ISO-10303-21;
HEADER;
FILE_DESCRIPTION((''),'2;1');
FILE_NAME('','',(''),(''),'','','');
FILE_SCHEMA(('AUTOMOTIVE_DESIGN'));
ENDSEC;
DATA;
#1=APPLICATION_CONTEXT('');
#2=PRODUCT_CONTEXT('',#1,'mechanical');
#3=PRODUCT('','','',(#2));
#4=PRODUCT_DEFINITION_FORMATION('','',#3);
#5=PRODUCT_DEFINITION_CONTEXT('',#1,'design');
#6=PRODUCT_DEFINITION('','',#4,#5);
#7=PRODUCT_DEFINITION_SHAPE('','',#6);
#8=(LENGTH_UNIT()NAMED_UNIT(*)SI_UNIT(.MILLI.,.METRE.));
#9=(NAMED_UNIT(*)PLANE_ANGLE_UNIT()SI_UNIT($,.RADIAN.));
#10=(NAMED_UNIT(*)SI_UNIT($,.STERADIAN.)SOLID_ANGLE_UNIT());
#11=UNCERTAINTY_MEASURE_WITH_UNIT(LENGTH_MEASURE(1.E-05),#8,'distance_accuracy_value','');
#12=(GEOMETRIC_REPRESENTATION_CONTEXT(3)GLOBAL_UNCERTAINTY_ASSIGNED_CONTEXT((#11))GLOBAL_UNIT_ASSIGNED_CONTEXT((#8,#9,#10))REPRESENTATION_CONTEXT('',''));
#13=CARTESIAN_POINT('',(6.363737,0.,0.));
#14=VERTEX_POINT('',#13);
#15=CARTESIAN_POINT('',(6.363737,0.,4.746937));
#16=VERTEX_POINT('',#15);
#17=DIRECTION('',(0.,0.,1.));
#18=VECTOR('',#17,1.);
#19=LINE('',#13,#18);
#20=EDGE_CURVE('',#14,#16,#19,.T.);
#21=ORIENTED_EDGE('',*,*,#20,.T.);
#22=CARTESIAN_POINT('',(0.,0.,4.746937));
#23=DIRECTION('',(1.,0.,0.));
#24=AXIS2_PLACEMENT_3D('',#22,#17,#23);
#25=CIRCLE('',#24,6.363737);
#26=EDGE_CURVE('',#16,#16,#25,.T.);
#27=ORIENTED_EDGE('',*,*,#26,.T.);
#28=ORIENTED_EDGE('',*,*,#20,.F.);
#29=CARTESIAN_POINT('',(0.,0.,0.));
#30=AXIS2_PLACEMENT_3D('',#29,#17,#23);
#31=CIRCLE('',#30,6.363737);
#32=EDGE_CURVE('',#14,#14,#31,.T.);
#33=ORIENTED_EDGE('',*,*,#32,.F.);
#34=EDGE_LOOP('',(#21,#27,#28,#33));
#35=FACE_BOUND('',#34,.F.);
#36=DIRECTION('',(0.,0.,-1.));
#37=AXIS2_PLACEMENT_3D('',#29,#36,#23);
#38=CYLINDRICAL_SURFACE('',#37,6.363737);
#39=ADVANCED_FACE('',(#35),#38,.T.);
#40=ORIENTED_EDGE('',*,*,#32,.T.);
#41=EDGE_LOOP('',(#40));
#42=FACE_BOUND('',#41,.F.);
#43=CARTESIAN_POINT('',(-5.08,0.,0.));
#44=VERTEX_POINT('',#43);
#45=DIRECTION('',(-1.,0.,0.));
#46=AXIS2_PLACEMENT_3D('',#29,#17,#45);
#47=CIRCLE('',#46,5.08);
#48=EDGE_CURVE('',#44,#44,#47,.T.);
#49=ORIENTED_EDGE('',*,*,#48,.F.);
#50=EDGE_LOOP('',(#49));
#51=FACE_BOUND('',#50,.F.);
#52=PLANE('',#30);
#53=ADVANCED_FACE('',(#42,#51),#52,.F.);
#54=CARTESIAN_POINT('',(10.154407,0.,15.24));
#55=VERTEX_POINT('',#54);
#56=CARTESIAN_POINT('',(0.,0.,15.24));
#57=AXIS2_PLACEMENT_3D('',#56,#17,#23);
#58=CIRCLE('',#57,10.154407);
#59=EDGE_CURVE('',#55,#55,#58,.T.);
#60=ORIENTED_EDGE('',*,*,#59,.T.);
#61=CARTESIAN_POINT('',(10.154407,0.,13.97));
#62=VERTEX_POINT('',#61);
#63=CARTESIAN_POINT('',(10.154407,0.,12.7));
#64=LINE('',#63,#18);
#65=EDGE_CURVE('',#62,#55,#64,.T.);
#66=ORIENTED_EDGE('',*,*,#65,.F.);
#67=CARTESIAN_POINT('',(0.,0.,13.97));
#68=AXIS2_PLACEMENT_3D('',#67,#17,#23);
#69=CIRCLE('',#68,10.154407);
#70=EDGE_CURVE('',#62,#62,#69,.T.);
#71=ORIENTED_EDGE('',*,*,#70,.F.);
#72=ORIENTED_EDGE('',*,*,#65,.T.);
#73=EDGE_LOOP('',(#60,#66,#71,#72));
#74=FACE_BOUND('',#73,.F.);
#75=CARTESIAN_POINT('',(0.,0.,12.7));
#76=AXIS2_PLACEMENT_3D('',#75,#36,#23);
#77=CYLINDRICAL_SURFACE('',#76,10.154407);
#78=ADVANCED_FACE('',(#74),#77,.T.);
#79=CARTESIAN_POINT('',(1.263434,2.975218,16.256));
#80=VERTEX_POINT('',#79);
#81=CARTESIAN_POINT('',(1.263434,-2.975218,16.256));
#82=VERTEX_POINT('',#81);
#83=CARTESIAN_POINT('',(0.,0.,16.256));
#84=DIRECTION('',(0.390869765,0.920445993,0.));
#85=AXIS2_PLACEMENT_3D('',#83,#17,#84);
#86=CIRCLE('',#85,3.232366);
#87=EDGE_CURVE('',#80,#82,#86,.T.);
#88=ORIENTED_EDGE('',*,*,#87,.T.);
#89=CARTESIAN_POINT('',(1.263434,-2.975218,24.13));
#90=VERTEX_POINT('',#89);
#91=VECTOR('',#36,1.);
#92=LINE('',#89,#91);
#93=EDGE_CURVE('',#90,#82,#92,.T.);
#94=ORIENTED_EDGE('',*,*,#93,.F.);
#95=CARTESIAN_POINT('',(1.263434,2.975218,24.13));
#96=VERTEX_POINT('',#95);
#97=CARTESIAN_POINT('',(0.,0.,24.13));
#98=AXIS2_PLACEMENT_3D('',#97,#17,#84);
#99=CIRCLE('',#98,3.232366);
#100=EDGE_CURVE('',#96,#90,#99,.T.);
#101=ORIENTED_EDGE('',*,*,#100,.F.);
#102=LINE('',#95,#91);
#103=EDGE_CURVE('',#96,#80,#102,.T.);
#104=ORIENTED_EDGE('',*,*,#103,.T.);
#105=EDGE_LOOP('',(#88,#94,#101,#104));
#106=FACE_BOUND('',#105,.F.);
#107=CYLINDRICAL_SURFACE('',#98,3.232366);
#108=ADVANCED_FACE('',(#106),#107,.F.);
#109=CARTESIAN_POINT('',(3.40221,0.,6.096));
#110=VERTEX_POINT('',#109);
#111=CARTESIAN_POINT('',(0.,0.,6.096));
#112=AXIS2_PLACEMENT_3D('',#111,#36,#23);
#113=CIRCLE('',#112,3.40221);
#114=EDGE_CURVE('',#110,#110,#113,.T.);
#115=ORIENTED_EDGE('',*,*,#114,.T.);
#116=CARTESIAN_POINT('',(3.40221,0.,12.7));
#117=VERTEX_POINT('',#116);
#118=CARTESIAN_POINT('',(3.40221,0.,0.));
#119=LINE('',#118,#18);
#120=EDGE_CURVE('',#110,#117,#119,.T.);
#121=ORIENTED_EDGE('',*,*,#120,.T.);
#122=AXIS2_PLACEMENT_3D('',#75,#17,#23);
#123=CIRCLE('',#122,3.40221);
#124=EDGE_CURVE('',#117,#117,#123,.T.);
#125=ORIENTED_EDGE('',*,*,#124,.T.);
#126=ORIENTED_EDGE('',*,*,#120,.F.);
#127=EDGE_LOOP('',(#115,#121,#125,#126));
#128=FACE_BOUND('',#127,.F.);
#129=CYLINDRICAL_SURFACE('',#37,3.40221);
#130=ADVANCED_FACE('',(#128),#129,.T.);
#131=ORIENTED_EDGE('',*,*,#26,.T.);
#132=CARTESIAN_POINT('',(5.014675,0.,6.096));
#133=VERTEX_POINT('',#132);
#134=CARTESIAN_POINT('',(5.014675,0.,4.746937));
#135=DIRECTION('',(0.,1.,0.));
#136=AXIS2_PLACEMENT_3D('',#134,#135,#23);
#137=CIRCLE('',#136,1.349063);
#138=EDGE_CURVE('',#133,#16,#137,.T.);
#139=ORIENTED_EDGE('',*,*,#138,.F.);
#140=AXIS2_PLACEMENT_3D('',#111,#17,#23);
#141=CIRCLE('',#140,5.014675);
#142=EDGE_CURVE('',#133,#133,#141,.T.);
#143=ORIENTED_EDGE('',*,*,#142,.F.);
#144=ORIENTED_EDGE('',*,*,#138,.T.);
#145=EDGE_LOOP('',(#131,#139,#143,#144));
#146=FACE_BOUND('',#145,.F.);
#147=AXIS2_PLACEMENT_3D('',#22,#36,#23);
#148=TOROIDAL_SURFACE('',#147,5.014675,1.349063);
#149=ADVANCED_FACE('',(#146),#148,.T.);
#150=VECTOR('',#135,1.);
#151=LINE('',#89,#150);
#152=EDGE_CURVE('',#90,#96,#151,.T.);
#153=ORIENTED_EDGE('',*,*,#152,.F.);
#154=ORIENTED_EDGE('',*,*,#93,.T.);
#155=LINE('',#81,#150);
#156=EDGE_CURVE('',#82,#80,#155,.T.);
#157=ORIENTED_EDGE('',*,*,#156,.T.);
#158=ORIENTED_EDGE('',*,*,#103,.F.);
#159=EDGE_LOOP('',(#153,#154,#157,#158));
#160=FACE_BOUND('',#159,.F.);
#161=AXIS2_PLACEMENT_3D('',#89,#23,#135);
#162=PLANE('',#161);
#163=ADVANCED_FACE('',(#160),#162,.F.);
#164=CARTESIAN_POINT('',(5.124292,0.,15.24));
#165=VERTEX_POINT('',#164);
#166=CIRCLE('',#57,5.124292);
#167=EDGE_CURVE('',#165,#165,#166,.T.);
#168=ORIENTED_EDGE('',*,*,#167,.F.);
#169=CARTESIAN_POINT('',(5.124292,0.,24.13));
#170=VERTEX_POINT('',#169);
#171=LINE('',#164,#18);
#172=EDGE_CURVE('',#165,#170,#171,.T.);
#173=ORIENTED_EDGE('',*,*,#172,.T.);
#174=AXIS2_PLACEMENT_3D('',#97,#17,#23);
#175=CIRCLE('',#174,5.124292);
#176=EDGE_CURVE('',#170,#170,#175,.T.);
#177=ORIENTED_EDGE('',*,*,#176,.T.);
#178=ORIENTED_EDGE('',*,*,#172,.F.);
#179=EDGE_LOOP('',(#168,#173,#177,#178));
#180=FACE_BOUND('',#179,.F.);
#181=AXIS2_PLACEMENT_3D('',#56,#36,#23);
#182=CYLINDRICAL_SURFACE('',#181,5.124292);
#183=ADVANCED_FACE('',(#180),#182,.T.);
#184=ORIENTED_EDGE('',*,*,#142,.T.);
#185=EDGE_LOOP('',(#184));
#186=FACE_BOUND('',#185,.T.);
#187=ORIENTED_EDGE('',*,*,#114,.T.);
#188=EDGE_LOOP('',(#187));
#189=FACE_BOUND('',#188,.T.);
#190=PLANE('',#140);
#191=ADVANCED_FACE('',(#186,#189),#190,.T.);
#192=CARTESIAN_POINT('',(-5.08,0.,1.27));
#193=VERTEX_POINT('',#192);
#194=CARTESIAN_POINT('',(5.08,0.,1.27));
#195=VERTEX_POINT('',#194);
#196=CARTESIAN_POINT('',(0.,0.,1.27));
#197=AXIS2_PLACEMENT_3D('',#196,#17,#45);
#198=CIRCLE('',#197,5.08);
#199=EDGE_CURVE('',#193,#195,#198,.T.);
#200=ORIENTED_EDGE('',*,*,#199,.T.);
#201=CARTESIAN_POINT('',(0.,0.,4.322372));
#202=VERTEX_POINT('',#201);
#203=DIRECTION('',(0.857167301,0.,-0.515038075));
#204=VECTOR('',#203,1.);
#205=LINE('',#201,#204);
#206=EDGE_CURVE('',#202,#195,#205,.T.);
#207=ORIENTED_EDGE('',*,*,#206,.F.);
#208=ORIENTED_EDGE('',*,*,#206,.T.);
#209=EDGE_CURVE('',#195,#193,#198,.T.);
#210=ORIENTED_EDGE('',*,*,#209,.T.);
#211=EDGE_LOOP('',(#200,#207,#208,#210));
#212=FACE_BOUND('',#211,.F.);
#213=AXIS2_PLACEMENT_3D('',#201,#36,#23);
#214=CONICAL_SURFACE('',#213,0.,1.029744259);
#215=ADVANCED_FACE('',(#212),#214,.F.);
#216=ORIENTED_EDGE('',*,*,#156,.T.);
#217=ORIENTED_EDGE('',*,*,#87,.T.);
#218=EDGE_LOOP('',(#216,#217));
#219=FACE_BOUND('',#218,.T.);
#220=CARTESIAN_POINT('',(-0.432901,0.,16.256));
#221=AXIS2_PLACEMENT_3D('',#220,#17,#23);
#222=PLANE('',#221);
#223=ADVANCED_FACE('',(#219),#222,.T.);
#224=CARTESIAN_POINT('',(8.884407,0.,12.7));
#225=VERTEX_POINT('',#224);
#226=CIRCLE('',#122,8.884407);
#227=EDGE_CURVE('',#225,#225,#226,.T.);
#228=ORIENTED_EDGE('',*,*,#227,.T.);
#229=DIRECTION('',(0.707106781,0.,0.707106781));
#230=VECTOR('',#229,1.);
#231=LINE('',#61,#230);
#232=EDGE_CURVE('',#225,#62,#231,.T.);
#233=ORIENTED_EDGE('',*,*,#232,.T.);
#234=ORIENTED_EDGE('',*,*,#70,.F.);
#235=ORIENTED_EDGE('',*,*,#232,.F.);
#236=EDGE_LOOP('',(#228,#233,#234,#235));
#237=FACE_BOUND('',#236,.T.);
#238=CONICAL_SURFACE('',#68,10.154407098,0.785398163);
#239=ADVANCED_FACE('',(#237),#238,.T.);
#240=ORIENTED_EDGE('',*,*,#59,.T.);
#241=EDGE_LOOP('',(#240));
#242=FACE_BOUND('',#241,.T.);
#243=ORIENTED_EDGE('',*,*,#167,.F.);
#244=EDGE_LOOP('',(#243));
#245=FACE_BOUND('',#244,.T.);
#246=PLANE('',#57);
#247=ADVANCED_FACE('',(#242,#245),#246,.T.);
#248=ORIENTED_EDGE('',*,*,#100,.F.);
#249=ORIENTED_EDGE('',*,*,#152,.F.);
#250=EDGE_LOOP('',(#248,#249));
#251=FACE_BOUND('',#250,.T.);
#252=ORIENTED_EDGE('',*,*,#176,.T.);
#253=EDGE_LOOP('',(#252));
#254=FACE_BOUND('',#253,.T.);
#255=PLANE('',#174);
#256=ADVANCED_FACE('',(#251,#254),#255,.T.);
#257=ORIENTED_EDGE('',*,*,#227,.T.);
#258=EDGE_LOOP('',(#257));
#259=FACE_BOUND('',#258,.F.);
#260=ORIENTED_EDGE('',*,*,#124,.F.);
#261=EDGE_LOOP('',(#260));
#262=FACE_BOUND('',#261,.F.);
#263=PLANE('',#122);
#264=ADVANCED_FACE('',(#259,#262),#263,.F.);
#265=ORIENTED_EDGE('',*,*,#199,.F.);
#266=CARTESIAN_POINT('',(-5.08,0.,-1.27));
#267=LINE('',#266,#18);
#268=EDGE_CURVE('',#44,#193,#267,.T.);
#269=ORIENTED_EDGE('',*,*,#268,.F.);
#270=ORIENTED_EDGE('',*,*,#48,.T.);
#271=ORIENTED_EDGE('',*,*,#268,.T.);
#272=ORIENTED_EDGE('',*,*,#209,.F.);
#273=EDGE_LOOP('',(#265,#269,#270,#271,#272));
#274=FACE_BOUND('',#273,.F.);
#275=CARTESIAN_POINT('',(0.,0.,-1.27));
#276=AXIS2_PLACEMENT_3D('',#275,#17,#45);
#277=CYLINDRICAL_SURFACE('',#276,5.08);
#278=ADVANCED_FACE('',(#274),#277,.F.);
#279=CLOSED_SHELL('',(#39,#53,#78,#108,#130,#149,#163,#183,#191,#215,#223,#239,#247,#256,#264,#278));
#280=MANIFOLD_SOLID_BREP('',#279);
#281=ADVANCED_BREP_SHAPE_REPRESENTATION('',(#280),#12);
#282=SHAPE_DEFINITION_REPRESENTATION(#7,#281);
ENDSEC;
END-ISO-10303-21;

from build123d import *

# Parameters (mm, degrees)
F0_R      = 6.3637373436
F1_DEPTH  = 6.096
F2_R      = 3.4022099148
F3_DEPTH  = 12.7
F5_R      = 10.1544070979
F6_DEPTH  = 2.54
F8_R      = 5.1242922549
F9_DEPTH  = 8.89
F12_DEPTH = 7.874
F13_D     = 10.16
F13_DEPTH = 1.27
F13_TIP   = 3.0523719447
F14_R     = 1.3490625387
F15_SIZE  = 1.27


with BuildPart() as f1:
    # F0 (on Top) → F1 (new body)
    with BuildSketch(Plane.XY):
        Circle(F0_R)
    extrude(amount=F1_DEPTH)

    # F2 (on Top) → F3 (join)
    with BuildSketch(Plane.XY):
        Circle(F2_R)
    extrude(amount=F3_DEPTH)

    # F5 (on offset) → F6 (join)
    with BuildSketch(Plane.XY.offset(12.7)):
        Circle(F5_R)
    extrude(amount=F6_DEPTH)

    # F8 (on offset) → F9 (join)
    with BuildSketch(Plane.XY.offset(15.24)):
        Circle(F8_R)
    extrude(amount=F9_DEPTH)

    # F11 (on offset) → F12 (cut)
    with BuildSketch(Plane.XY.offset(24.13)):
        with BuildLine():
            Line((1.2634341, 0), (1.2634341, 2.9752182418))
            ThreePointArc((1.2634341, 2.9752182418), (-3.2323659, 0), (1.2634341, -2.9752182418))
            Line((1.2634341, -2.9752182418), (1.2634341, 0))
        make_face()
    extrude(amount=-F12_DEPTH, mode=Mode.SUBTRACT)

    # F13
    with Locations(Plane(origin=(0, 0, 0), x_dir=(1, 0, 0), z_dir=(0, 0, -1))):
        with Locations((0, 0)):
            Hole(F13_D / 2, depth=F13_DEPTH)
            with Locations((0, 0, -(F13_DEPTH + F13_TIP / 2))):  # 118° drill point
                Cone(0, F13_D / 2, F13_TIP, mode=Mode.SUBTRACT)

    # F14
    f14_edges = [f1.edges().sort_by_distance(p)[0] for p in [
        (-6.363737, 0, 6.096),
    ]]
    fillet(f14_edges, radius=F14_R)

    # F15
    f15_edges = [f1.edges().sort_by_distance(p)[0] for p in [
        (-10.154407, 0, 12.7),
    ]]
    chamfer(f15_edges, length=F15_SIZE)


solid = f1.part
